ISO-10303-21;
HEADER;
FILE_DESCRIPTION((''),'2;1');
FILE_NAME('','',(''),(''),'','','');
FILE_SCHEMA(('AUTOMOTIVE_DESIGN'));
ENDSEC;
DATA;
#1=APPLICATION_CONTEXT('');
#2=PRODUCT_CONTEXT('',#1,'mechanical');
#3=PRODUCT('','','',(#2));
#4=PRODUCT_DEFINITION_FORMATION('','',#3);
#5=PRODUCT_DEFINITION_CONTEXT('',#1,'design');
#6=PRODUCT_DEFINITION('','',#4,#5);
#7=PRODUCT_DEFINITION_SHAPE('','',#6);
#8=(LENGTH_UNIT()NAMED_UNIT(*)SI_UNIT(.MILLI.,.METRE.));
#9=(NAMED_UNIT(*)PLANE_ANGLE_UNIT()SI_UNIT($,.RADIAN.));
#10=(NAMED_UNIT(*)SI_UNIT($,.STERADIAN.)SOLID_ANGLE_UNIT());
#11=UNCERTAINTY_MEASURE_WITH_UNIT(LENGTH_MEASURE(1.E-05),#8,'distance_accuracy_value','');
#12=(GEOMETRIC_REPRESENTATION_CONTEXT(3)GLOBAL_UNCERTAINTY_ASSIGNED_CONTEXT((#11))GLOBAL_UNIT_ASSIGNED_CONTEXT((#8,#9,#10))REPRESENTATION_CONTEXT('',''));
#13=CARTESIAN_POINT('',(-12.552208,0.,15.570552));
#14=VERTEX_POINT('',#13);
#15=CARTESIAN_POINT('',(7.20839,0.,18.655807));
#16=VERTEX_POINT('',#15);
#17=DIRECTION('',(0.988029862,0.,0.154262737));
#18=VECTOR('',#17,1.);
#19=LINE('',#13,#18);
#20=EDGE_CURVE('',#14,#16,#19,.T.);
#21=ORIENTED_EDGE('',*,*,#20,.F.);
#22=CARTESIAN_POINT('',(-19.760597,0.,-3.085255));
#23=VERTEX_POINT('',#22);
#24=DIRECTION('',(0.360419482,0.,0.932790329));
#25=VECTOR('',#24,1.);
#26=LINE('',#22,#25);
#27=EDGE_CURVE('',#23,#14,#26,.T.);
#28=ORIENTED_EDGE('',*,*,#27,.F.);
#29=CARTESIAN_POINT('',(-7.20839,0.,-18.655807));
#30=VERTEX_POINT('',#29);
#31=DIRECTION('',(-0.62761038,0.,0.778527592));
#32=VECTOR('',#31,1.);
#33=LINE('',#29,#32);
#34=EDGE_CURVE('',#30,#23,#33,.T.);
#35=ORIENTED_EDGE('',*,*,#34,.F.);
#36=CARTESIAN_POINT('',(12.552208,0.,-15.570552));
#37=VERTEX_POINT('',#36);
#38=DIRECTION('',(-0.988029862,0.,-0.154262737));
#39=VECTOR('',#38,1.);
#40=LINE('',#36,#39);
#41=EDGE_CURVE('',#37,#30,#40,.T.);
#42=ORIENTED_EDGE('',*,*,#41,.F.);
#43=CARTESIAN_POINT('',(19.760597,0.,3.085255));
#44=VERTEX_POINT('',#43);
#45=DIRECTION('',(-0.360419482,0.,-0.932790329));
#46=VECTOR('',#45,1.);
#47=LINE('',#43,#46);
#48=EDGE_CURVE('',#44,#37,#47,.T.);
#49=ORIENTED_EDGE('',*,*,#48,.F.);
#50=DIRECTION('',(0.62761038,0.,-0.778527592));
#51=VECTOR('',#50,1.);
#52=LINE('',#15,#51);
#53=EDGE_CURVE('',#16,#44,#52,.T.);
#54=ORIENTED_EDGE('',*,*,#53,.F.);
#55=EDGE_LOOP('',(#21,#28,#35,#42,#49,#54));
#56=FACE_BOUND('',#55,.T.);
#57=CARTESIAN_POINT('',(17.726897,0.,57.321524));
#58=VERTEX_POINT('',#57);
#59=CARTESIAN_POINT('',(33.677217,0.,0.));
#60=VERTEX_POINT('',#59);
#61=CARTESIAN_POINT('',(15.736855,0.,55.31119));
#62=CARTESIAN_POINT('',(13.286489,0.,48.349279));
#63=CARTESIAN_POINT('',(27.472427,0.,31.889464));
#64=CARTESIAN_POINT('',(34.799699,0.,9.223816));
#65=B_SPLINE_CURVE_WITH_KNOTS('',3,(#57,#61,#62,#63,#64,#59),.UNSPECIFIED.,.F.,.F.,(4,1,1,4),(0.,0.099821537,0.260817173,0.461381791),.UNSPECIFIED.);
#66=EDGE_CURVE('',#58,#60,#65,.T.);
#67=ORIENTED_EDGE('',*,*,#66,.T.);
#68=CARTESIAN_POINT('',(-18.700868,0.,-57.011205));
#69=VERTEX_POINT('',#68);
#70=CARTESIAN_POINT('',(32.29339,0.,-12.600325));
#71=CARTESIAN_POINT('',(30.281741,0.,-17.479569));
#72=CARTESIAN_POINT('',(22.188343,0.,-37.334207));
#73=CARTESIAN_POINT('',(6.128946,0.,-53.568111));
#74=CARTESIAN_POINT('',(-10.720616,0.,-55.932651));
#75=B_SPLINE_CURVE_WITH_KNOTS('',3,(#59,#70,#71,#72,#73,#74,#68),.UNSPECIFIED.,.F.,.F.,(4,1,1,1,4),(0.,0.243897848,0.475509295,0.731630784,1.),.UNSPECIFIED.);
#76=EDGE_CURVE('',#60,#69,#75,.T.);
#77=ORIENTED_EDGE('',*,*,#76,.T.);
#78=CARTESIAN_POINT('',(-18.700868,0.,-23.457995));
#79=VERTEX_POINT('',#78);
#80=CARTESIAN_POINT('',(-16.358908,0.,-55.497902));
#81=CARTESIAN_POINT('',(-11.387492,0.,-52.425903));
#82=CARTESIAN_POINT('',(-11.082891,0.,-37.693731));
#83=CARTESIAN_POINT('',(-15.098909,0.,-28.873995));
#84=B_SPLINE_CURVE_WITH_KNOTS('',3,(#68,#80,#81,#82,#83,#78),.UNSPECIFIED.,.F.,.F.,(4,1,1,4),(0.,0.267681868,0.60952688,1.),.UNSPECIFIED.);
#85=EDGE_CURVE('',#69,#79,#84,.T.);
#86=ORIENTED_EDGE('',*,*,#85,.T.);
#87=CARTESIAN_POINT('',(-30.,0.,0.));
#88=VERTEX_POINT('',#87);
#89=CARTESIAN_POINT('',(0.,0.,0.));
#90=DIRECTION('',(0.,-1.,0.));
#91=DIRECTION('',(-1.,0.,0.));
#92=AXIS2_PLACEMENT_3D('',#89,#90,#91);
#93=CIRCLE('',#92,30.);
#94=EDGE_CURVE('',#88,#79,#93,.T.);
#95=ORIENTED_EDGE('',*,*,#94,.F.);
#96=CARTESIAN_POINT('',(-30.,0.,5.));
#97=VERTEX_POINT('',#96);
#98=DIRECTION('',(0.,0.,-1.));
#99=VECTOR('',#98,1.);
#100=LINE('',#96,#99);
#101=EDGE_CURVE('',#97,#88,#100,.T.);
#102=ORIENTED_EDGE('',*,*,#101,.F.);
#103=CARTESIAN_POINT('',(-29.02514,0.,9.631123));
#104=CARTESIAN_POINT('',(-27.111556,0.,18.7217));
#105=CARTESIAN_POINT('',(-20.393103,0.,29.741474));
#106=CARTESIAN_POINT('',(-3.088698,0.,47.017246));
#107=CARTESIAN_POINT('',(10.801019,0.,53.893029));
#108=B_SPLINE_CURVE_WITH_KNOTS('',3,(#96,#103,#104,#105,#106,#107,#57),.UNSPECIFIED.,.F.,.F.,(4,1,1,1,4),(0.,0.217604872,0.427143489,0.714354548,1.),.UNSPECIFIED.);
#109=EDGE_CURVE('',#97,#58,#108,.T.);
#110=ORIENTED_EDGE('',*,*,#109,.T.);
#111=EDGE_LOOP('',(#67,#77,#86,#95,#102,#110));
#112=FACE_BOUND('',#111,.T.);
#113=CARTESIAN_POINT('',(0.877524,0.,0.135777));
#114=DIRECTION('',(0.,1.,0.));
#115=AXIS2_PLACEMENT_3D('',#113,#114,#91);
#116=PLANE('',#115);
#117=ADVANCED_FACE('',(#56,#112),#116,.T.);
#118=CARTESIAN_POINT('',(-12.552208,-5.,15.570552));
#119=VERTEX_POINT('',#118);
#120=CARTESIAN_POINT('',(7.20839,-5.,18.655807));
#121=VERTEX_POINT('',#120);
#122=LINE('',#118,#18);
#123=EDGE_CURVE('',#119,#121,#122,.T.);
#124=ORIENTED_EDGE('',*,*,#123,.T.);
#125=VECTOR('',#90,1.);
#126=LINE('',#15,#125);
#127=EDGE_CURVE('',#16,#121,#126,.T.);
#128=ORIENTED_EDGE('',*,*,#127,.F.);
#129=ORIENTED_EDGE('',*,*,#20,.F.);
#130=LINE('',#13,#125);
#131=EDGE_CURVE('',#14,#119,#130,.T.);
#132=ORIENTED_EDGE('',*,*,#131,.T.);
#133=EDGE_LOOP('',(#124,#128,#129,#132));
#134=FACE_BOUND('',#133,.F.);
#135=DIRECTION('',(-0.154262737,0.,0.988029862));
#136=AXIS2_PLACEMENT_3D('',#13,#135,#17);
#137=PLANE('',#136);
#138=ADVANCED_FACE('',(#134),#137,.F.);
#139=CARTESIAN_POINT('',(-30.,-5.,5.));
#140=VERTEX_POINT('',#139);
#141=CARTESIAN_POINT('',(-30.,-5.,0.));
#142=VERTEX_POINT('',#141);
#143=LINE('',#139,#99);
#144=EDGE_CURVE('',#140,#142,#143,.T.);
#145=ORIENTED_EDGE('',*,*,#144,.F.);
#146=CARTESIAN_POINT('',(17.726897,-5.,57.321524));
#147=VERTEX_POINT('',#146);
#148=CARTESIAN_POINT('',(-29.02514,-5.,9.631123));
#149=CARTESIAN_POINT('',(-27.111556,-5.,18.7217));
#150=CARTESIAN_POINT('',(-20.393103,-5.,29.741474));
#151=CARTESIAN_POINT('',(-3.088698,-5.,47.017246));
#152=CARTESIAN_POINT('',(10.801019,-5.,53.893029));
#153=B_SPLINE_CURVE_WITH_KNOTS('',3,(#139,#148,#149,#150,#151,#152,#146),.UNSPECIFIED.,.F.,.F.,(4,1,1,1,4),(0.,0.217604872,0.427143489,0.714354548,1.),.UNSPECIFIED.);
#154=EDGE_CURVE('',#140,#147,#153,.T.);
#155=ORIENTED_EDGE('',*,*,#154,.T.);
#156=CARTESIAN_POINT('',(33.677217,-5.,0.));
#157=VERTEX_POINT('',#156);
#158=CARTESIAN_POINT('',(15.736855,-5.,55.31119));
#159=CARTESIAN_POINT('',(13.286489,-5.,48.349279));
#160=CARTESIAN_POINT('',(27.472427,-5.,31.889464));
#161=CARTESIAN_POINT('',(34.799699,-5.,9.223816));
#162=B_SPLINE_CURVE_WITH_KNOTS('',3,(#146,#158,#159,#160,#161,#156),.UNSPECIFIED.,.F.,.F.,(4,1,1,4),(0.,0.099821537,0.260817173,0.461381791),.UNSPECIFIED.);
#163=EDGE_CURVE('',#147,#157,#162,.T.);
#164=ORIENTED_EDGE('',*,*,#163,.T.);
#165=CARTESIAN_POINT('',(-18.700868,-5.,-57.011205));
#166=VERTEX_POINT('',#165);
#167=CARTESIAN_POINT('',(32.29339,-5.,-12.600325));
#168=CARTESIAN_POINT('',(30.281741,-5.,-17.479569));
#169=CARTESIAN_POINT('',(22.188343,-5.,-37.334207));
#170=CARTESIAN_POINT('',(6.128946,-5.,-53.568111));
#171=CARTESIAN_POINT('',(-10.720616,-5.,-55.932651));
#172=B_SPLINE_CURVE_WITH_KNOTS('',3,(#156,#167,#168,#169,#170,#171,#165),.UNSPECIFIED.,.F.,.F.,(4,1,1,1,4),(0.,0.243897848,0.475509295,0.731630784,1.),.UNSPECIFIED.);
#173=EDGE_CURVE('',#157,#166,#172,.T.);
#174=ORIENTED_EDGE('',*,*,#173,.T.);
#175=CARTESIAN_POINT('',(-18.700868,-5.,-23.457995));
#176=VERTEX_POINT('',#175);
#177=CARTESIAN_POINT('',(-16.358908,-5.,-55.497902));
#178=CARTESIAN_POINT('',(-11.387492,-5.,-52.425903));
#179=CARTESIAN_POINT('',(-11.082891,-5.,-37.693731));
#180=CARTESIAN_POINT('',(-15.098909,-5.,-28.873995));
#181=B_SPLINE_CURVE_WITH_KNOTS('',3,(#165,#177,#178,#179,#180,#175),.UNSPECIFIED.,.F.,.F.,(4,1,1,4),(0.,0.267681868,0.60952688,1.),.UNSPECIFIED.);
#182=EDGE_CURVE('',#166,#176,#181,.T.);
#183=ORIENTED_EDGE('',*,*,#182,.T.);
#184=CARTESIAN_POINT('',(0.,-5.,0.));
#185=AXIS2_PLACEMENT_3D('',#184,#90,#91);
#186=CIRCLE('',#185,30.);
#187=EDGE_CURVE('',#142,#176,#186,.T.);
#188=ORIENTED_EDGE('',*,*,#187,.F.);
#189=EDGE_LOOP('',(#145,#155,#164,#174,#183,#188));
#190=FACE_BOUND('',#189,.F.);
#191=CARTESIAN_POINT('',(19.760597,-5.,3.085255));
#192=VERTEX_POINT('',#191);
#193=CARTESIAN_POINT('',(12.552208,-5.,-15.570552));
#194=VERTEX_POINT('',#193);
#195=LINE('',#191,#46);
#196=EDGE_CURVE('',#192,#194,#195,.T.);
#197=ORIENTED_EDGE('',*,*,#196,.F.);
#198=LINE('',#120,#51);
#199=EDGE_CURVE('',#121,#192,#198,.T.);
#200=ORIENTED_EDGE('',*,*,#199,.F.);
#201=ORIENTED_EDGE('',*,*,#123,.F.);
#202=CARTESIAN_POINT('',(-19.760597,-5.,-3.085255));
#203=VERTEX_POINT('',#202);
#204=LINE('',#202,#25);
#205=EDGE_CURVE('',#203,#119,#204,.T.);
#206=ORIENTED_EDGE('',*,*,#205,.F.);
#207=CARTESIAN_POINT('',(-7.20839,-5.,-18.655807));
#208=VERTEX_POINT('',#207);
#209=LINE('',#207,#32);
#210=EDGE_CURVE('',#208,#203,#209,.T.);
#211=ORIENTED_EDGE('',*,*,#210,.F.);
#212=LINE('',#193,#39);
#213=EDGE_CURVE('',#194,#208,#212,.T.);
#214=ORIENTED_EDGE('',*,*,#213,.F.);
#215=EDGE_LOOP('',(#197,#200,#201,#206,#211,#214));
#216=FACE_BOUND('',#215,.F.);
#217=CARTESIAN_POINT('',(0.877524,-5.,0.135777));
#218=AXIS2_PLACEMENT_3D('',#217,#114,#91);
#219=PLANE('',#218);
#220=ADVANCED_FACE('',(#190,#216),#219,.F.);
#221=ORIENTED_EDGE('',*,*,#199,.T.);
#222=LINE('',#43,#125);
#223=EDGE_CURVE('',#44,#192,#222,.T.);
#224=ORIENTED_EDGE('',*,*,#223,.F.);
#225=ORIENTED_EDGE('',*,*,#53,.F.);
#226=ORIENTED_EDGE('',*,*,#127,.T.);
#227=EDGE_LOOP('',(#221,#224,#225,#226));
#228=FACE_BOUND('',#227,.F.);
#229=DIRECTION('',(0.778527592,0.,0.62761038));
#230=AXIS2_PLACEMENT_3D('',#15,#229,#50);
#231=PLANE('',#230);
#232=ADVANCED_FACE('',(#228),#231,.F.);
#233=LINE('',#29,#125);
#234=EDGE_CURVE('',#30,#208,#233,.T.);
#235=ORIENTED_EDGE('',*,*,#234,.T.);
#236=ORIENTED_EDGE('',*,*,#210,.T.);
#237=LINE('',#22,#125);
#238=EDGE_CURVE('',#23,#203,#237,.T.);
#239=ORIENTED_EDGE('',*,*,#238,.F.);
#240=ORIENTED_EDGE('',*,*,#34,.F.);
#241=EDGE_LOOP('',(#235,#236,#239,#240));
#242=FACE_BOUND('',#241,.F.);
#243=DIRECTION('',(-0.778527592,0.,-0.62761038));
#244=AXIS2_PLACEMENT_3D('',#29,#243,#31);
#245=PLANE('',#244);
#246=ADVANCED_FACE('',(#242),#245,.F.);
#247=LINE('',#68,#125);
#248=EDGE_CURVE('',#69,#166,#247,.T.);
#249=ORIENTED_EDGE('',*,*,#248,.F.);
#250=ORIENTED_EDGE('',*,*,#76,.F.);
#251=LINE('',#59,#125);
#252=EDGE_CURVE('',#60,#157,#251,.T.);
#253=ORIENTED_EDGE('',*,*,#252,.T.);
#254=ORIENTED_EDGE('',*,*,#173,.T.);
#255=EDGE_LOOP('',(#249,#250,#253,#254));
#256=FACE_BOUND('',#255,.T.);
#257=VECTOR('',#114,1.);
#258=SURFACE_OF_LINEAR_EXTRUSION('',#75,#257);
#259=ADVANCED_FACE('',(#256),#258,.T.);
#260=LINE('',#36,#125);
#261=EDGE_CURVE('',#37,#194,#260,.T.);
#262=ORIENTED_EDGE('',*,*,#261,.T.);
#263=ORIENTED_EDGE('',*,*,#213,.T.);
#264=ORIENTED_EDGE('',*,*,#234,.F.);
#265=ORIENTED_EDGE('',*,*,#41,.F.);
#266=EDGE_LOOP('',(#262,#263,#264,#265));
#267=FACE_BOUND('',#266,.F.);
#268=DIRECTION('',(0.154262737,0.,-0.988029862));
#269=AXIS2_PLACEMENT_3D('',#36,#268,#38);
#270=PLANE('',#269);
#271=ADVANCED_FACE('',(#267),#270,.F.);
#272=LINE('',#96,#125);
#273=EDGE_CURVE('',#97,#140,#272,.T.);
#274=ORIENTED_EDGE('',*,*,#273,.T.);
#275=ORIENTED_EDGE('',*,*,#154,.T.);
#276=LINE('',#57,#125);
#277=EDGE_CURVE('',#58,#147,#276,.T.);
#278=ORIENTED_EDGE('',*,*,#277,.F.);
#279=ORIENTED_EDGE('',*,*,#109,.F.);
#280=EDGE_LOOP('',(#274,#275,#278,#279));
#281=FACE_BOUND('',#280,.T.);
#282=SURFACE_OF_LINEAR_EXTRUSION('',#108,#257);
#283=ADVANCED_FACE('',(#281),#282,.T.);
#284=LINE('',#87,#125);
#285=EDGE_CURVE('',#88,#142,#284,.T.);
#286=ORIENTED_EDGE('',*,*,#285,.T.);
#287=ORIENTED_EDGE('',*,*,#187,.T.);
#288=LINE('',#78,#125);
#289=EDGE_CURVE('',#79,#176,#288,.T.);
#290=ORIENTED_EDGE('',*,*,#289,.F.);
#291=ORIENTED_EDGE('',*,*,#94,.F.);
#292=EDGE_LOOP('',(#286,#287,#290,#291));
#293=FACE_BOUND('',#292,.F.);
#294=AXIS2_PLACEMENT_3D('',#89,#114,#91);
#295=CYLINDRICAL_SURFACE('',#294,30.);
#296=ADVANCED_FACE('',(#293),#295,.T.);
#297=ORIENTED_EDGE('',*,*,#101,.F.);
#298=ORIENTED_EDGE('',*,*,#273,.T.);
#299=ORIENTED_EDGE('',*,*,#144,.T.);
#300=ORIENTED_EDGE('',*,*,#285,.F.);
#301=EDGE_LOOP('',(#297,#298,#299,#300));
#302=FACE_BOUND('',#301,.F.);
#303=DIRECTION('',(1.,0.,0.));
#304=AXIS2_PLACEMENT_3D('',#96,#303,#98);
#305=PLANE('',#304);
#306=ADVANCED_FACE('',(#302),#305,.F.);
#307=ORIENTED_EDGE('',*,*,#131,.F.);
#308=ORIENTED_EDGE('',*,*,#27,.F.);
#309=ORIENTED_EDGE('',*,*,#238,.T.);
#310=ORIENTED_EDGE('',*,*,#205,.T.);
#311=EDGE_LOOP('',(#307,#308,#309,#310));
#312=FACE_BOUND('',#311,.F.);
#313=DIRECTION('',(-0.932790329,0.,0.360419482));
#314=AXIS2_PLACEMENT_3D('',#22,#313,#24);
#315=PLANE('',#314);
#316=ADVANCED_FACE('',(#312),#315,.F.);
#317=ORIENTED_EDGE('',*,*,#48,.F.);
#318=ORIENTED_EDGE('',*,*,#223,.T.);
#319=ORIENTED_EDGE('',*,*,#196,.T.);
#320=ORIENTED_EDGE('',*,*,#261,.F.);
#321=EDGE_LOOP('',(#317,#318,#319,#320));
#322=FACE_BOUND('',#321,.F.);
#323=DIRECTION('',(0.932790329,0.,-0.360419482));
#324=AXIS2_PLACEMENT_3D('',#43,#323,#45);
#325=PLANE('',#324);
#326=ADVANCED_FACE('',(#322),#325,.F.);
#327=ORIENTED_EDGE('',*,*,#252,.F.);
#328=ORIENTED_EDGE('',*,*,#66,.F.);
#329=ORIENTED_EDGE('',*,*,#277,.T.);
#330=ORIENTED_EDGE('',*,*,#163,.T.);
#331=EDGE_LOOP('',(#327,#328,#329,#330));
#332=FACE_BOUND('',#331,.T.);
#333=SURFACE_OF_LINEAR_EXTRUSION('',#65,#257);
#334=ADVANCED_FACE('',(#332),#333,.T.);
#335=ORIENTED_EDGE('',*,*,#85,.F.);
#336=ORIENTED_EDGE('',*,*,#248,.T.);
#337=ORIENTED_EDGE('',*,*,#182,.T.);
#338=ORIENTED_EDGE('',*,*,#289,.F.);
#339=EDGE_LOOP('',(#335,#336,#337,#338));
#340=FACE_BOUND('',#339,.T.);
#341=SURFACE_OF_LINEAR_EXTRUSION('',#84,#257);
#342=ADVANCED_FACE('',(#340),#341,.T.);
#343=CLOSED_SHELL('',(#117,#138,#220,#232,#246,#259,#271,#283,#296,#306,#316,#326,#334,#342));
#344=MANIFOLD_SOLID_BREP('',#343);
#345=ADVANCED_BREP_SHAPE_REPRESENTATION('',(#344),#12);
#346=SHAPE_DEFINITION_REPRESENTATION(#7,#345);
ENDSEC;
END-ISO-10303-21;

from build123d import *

# Parameters (mm, degrees)
F1_DEPTH = 5


with BuildPart() as f1:
    # F0 (on Front) → F1 (new body)
    with BuildSketch(Plane.XZ):
        with BuildLine():
            add(Edge.make_bspline(
                [(17.7268970846, 57.3215240529), (15.7368547016, 55.3111901481), (13.2864885412, 48.3492794063), (27.4724268838, 31.8894637146), (34.7996985334, 9.2238161581), (33.6772166193, 0)],
                knots=[0, 0, 0, 0, 0.0998215374, 0.2608171732, 0.4613817906, 0.4613817906, 0.4613817906, 0.4613817906], degree=3))
            add(Edge.make_bspline(
                [(-30, 5), (-29.0251400049, 9.6311227922), (-27.111556473, 18.7217002639), (-20.3931031734, 29.7414743972), (-3.0886979237, 47.0172460729), (10.8010188696, 53.8930285257), (17.7268970846, 57.3215240529)],
                knots=[0, 0, 0, 0, 0.217604872, 0.4271434889, 0.714354548, 1, 1, 1, 1], degree=3))
            Line((-30, 5), (-30, 0))
            ThreePointArc((-30, 0), (-27.0280044879, -13.0187162732), (-18.7008684399, -23.4579947906))
            add(Edge.make_bspline(
                [(-18.7008684399, -57.0112052109), (-16.3589078306, -55.4979023543), (-11.3874918945, -52.4259033179), (-11.0828909126, -37.6937310973), (-15.0989089292, -28.8739952525), (-18.7008684399, -23.4579947906)],
                knots=[0, 0, 0, 0, 0.2676818681, 0.6095268804, 1, 1, 1, 1], degree=3))
            add(Edge.make_bspline(
                [(33.6772166193, 0), (32.7849820148, -7.3317956016), (23.9235568427, -18.4163736638), (6.4508308138, -37.9844205648), (-6.683168554, -53.2337896345), (-18.7008684399, -57.0112052109)],
                knots=[0.4613817906, 0.4613817906, 0.4613817906, 0.4613817906, 0.6208059112, 0.8001995813, 1, 1, 1, 1], degree=3))
        make_face()
        Polygon((-12.5522075988, 15.5705518334), (7.2083896393, 18.6558065708), (19.7605972381, 3.0852547374), (12.5522075988, -15.5705518334), (-7.2083896393, -18.6558065708), (-19.7605972381, -3.0852547374), align=None, mode=Mode.SUBTRACT)
        with BuildLine():
            add(Edge.make_bspline(
                [(33.6772166193, 0), (32.2933898964, -12.6003254892), (30.2817412105, -17.4795691907), (22.1883431115, -37.3342070936), (6.1289464447, -53.5681106433), (-10.7206157713, -55.9326505298), (-18.7008684399, -57.0112052109)],
                knots=[0, 0, 0, 0, 0.243897848, 0.4755092955, 0.7316307838, 1, 1, 1, 1], degree=3))
            add(Edge.make_bspline(
                [(33.6772166193, 0), (32.7849820148, -7.3317956016), (23.9235568427, -18.4163736638), (6.4508308138, -37.9844205648), (-6.683168554, -53.2337896345), (-18.7008684399, -57.0112052109)],
                knots=[0.4613817906, 0.4613817906, 0.4613817906, 0.4613817906, 0.6208059112, 0.8001995813, 1, 1, 1, 1], degree=3))
        make_face()
    extrude(amount=F1_DEPTH)


solid = f1.part
